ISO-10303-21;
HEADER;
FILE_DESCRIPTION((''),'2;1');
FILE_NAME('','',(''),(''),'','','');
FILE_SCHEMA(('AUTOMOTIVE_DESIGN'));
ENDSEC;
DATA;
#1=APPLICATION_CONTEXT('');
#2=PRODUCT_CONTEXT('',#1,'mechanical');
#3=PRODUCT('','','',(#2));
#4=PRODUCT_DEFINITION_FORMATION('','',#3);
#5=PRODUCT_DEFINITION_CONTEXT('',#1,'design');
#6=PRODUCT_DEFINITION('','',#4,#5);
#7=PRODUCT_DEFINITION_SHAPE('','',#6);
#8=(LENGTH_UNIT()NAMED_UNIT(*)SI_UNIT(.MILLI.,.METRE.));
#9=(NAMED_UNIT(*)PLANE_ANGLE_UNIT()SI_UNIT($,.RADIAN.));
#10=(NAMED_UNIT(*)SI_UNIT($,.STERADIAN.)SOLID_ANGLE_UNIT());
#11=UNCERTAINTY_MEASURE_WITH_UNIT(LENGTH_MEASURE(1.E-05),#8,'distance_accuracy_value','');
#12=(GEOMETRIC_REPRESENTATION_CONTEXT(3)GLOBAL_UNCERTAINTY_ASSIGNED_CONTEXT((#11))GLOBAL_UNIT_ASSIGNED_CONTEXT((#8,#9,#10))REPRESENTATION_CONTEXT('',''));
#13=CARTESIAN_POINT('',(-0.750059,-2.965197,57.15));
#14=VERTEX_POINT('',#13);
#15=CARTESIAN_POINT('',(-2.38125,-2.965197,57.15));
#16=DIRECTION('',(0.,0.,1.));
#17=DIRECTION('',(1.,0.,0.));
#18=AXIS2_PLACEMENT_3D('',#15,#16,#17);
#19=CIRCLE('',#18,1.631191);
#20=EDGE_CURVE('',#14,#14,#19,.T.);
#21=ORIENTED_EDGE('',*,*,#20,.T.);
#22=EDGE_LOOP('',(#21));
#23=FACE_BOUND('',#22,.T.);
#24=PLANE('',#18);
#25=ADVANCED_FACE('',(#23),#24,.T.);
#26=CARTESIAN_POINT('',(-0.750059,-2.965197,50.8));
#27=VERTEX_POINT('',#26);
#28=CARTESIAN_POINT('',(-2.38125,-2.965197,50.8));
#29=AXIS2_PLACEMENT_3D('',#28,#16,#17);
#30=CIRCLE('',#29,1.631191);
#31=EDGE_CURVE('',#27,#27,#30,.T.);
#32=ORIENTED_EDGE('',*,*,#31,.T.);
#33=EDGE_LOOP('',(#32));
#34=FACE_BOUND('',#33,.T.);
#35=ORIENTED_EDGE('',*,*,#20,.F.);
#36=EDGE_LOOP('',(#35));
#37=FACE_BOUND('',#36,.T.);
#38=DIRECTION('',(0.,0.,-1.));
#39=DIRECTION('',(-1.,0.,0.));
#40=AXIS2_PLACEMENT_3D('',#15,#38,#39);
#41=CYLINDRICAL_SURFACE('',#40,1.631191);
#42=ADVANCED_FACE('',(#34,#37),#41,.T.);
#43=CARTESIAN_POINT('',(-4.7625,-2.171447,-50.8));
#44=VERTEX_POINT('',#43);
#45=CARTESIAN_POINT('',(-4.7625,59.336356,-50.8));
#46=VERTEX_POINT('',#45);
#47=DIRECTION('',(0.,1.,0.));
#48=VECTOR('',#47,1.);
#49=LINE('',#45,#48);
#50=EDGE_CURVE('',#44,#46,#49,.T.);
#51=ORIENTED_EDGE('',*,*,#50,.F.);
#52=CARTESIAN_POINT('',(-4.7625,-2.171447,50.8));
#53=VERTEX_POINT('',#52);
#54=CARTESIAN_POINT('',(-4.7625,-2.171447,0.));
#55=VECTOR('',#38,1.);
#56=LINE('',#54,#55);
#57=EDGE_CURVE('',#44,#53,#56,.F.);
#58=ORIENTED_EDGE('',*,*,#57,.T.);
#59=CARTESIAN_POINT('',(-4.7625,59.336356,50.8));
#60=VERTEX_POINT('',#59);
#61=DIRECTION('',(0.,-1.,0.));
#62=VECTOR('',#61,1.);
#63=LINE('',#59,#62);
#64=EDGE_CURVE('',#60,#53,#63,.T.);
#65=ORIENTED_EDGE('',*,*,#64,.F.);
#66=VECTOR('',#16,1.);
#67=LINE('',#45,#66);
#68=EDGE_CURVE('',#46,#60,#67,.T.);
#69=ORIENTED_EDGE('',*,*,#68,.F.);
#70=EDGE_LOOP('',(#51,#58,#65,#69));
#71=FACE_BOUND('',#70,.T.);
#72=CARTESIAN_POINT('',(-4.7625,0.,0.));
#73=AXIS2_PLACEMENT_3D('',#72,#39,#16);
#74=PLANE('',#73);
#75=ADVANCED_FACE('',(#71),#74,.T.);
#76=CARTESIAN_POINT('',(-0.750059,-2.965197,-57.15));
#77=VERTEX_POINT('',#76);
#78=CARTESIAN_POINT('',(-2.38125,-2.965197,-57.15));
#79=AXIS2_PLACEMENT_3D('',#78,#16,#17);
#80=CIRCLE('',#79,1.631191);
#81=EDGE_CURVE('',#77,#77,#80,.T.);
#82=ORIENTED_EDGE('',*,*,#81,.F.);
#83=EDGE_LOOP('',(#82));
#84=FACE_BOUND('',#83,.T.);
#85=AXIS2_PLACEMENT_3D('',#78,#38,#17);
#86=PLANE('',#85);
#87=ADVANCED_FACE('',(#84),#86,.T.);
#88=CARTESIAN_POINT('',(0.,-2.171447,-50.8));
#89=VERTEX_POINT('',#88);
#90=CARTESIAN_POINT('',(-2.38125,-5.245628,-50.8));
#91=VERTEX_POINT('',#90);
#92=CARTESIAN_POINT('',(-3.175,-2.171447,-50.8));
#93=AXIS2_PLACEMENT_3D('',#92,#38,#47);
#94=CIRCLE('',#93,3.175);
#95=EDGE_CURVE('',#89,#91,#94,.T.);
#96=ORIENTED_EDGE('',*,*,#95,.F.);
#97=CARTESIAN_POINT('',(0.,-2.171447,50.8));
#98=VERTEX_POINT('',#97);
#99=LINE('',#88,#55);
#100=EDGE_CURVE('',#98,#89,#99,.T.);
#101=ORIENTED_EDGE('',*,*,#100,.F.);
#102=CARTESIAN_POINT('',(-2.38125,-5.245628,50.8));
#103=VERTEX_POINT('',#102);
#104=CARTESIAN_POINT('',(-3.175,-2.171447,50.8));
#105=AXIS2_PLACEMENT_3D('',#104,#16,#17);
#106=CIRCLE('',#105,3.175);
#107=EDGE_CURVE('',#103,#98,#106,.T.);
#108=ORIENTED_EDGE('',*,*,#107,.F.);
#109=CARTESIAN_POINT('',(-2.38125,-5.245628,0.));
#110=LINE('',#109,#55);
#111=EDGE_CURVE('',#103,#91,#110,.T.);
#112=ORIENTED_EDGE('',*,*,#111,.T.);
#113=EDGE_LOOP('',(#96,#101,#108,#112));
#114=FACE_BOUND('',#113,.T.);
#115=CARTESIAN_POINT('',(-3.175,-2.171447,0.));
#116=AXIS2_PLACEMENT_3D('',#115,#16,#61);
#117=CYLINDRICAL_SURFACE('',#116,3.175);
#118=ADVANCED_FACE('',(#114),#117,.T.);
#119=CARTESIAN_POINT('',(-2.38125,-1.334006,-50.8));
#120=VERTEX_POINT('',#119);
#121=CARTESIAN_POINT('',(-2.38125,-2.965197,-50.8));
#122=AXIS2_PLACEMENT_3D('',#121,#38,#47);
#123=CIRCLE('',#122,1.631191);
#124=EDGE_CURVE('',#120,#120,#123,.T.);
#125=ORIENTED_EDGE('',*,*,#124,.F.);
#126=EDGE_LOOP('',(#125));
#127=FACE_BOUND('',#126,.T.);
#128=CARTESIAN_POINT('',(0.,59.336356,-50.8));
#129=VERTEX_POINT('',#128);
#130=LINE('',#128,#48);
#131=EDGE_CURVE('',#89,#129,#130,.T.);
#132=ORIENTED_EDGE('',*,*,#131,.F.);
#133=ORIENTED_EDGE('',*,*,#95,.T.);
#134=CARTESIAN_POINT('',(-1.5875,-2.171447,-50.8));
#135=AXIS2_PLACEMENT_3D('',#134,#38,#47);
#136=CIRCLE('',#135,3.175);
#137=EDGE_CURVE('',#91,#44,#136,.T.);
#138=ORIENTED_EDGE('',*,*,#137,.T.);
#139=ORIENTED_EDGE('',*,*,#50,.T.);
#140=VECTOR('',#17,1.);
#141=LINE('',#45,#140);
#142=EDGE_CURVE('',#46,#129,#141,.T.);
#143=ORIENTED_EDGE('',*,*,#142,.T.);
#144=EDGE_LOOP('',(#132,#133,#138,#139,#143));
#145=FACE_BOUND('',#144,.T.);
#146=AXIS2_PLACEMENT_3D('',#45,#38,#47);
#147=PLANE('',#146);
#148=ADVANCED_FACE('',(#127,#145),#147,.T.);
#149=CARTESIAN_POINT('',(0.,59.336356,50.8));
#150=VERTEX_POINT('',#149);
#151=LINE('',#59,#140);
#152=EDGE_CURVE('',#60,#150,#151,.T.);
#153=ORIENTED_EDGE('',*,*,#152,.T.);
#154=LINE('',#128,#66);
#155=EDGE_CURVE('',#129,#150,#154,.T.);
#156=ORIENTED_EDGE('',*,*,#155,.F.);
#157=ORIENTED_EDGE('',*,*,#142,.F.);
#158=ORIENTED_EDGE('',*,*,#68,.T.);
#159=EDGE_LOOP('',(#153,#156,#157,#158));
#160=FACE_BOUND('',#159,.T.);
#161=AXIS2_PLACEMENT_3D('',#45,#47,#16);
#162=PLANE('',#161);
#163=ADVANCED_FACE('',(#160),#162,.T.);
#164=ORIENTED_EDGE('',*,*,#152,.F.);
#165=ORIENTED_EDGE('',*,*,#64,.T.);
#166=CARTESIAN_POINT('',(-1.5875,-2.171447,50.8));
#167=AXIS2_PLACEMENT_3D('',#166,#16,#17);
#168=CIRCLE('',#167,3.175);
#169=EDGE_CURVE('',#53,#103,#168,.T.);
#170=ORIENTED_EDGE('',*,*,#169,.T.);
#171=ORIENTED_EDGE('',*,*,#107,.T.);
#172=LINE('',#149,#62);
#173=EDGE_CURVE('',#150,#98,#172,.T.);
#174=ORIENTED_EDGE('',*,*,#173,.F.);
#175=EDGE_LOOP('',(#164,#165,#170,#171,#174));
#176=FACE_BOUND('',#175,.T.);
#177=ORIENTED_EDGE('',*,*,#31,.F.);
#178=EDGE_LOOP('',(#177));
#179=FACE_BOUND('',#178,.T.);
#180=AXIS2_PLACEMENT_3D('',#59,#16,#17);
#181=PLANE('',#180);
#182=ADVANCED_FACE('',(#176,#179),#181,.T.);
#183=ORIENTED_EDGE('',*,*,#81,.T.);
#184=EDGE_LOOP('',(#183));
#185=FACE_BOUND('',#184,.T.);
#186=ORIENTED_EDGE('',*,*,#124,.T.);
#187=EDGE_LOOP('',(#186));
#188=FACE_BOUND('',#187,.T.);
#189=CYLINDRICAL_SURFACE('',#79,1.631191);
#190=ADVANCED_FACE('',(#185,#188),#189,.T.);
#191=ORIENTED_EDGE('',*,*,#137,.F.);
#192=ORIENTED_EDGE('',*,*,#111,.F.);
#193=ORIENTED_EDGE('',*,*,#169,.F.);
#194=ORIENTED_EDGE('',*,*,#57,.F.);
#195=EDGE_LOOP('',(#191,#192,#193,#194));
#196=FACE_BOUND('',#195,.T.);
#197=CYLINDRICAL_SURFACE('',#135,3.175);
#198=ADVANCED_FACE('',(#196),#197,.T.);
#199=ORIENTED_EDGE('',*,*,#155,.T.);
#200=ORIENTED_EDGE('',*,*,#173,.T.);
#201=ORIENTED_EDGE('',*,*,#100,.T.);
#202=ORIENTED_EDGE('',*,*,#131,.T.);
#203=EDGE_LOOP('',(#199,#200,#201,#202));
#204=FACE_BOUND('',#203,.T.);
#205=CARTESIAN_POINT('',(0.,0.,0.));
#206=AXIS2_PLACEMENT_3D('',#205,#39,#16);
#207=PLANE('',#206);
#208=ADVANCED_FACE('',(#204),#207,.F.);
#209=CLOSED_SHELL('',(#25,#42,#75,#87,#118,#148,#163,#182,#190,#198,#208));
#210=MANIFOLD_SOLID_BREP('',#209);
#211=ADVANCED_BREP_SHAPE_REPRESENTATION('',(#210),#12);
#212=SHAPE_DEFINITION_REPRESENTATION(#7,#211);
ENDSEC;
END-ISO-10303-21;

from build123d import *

# Parameters (mm, degrees)
SKETCH1_W           = 101.6
SKETCH1_H           = 64.682803082
BOSS_EXTRUDE1_DEPTH = 4.7625
SKETCH2_R           = 1.631191497
BOSS_EXTRUDE2_DEPTH = 6.35
FILLET2_R           = 3.175


with BuildPart() as part:
    # Sketch1 → Boss-Extrude1 (new body)
    with BuildSketch(Plane(origin=(0, 0, 0), x_dir=(0, 0, -1), z_dir=(1, 0, 0))):
        with Locations((0, 26.994954374)):
            Rectangle(SKETCH1_W, SKETCH1_H)
    extrude(amount=-BOSS_EXTRUDE1_DEPTH)

    # Sketch2 → Boss-Extrude2 (add)
    with BuildSketch(Plane.XY.offset(50.8)):
        with Locations((-2.38125, -2.965197167)):
            Circle(SKETCH2_R)
    boss_extrude2 = extrude(amount=BOSS_EXTRUDE2_DEPTH)

    # Mirror1: Boss-Extrude2 across plane
    add(boss_extrude2.mirror(Plane.XY))

    # Fillet2
    # the kernel refuses this fillet: 3.175 mm, written as the material it takes off along each edge
    with BuildSketch(Plane(origin=(0, -5.346447167, 58.7375), x_dir=(0, 1, 0), z_dir=(0, 0, -1))) as fillet2_piece_1:
        with BuildLine():
            CenterArc((FILLET2_R, -FILLET2_R), FILLET2_R, 90, 90)
            Line((0, -FILLET2_R), (0, 0))
            Line((0, 0), (FILLET2_R, 0))
        make_face()
    extrude(amount=117.475, mode=Mode.SUBTRACT)
    with BuildSketch(Plane(origin=(-4.7625, -5.346447167, 58.7375), x_dir=(0, 1, 0), z_dir=(0, 0, -1))) as fillet2_piece_2:
        with BuildLine():
            CenterArc((FILLET2_R, FILLET2_R), FILLET2_R, 180, 90)
            Line((0, FILLET2_R), (0, 0))
            Line((0, 0), (FILLET2_R, 0))
        make_face()
    extrude(amount=117.475, mode=Mode.SUBTRACT)


solid = part.part
